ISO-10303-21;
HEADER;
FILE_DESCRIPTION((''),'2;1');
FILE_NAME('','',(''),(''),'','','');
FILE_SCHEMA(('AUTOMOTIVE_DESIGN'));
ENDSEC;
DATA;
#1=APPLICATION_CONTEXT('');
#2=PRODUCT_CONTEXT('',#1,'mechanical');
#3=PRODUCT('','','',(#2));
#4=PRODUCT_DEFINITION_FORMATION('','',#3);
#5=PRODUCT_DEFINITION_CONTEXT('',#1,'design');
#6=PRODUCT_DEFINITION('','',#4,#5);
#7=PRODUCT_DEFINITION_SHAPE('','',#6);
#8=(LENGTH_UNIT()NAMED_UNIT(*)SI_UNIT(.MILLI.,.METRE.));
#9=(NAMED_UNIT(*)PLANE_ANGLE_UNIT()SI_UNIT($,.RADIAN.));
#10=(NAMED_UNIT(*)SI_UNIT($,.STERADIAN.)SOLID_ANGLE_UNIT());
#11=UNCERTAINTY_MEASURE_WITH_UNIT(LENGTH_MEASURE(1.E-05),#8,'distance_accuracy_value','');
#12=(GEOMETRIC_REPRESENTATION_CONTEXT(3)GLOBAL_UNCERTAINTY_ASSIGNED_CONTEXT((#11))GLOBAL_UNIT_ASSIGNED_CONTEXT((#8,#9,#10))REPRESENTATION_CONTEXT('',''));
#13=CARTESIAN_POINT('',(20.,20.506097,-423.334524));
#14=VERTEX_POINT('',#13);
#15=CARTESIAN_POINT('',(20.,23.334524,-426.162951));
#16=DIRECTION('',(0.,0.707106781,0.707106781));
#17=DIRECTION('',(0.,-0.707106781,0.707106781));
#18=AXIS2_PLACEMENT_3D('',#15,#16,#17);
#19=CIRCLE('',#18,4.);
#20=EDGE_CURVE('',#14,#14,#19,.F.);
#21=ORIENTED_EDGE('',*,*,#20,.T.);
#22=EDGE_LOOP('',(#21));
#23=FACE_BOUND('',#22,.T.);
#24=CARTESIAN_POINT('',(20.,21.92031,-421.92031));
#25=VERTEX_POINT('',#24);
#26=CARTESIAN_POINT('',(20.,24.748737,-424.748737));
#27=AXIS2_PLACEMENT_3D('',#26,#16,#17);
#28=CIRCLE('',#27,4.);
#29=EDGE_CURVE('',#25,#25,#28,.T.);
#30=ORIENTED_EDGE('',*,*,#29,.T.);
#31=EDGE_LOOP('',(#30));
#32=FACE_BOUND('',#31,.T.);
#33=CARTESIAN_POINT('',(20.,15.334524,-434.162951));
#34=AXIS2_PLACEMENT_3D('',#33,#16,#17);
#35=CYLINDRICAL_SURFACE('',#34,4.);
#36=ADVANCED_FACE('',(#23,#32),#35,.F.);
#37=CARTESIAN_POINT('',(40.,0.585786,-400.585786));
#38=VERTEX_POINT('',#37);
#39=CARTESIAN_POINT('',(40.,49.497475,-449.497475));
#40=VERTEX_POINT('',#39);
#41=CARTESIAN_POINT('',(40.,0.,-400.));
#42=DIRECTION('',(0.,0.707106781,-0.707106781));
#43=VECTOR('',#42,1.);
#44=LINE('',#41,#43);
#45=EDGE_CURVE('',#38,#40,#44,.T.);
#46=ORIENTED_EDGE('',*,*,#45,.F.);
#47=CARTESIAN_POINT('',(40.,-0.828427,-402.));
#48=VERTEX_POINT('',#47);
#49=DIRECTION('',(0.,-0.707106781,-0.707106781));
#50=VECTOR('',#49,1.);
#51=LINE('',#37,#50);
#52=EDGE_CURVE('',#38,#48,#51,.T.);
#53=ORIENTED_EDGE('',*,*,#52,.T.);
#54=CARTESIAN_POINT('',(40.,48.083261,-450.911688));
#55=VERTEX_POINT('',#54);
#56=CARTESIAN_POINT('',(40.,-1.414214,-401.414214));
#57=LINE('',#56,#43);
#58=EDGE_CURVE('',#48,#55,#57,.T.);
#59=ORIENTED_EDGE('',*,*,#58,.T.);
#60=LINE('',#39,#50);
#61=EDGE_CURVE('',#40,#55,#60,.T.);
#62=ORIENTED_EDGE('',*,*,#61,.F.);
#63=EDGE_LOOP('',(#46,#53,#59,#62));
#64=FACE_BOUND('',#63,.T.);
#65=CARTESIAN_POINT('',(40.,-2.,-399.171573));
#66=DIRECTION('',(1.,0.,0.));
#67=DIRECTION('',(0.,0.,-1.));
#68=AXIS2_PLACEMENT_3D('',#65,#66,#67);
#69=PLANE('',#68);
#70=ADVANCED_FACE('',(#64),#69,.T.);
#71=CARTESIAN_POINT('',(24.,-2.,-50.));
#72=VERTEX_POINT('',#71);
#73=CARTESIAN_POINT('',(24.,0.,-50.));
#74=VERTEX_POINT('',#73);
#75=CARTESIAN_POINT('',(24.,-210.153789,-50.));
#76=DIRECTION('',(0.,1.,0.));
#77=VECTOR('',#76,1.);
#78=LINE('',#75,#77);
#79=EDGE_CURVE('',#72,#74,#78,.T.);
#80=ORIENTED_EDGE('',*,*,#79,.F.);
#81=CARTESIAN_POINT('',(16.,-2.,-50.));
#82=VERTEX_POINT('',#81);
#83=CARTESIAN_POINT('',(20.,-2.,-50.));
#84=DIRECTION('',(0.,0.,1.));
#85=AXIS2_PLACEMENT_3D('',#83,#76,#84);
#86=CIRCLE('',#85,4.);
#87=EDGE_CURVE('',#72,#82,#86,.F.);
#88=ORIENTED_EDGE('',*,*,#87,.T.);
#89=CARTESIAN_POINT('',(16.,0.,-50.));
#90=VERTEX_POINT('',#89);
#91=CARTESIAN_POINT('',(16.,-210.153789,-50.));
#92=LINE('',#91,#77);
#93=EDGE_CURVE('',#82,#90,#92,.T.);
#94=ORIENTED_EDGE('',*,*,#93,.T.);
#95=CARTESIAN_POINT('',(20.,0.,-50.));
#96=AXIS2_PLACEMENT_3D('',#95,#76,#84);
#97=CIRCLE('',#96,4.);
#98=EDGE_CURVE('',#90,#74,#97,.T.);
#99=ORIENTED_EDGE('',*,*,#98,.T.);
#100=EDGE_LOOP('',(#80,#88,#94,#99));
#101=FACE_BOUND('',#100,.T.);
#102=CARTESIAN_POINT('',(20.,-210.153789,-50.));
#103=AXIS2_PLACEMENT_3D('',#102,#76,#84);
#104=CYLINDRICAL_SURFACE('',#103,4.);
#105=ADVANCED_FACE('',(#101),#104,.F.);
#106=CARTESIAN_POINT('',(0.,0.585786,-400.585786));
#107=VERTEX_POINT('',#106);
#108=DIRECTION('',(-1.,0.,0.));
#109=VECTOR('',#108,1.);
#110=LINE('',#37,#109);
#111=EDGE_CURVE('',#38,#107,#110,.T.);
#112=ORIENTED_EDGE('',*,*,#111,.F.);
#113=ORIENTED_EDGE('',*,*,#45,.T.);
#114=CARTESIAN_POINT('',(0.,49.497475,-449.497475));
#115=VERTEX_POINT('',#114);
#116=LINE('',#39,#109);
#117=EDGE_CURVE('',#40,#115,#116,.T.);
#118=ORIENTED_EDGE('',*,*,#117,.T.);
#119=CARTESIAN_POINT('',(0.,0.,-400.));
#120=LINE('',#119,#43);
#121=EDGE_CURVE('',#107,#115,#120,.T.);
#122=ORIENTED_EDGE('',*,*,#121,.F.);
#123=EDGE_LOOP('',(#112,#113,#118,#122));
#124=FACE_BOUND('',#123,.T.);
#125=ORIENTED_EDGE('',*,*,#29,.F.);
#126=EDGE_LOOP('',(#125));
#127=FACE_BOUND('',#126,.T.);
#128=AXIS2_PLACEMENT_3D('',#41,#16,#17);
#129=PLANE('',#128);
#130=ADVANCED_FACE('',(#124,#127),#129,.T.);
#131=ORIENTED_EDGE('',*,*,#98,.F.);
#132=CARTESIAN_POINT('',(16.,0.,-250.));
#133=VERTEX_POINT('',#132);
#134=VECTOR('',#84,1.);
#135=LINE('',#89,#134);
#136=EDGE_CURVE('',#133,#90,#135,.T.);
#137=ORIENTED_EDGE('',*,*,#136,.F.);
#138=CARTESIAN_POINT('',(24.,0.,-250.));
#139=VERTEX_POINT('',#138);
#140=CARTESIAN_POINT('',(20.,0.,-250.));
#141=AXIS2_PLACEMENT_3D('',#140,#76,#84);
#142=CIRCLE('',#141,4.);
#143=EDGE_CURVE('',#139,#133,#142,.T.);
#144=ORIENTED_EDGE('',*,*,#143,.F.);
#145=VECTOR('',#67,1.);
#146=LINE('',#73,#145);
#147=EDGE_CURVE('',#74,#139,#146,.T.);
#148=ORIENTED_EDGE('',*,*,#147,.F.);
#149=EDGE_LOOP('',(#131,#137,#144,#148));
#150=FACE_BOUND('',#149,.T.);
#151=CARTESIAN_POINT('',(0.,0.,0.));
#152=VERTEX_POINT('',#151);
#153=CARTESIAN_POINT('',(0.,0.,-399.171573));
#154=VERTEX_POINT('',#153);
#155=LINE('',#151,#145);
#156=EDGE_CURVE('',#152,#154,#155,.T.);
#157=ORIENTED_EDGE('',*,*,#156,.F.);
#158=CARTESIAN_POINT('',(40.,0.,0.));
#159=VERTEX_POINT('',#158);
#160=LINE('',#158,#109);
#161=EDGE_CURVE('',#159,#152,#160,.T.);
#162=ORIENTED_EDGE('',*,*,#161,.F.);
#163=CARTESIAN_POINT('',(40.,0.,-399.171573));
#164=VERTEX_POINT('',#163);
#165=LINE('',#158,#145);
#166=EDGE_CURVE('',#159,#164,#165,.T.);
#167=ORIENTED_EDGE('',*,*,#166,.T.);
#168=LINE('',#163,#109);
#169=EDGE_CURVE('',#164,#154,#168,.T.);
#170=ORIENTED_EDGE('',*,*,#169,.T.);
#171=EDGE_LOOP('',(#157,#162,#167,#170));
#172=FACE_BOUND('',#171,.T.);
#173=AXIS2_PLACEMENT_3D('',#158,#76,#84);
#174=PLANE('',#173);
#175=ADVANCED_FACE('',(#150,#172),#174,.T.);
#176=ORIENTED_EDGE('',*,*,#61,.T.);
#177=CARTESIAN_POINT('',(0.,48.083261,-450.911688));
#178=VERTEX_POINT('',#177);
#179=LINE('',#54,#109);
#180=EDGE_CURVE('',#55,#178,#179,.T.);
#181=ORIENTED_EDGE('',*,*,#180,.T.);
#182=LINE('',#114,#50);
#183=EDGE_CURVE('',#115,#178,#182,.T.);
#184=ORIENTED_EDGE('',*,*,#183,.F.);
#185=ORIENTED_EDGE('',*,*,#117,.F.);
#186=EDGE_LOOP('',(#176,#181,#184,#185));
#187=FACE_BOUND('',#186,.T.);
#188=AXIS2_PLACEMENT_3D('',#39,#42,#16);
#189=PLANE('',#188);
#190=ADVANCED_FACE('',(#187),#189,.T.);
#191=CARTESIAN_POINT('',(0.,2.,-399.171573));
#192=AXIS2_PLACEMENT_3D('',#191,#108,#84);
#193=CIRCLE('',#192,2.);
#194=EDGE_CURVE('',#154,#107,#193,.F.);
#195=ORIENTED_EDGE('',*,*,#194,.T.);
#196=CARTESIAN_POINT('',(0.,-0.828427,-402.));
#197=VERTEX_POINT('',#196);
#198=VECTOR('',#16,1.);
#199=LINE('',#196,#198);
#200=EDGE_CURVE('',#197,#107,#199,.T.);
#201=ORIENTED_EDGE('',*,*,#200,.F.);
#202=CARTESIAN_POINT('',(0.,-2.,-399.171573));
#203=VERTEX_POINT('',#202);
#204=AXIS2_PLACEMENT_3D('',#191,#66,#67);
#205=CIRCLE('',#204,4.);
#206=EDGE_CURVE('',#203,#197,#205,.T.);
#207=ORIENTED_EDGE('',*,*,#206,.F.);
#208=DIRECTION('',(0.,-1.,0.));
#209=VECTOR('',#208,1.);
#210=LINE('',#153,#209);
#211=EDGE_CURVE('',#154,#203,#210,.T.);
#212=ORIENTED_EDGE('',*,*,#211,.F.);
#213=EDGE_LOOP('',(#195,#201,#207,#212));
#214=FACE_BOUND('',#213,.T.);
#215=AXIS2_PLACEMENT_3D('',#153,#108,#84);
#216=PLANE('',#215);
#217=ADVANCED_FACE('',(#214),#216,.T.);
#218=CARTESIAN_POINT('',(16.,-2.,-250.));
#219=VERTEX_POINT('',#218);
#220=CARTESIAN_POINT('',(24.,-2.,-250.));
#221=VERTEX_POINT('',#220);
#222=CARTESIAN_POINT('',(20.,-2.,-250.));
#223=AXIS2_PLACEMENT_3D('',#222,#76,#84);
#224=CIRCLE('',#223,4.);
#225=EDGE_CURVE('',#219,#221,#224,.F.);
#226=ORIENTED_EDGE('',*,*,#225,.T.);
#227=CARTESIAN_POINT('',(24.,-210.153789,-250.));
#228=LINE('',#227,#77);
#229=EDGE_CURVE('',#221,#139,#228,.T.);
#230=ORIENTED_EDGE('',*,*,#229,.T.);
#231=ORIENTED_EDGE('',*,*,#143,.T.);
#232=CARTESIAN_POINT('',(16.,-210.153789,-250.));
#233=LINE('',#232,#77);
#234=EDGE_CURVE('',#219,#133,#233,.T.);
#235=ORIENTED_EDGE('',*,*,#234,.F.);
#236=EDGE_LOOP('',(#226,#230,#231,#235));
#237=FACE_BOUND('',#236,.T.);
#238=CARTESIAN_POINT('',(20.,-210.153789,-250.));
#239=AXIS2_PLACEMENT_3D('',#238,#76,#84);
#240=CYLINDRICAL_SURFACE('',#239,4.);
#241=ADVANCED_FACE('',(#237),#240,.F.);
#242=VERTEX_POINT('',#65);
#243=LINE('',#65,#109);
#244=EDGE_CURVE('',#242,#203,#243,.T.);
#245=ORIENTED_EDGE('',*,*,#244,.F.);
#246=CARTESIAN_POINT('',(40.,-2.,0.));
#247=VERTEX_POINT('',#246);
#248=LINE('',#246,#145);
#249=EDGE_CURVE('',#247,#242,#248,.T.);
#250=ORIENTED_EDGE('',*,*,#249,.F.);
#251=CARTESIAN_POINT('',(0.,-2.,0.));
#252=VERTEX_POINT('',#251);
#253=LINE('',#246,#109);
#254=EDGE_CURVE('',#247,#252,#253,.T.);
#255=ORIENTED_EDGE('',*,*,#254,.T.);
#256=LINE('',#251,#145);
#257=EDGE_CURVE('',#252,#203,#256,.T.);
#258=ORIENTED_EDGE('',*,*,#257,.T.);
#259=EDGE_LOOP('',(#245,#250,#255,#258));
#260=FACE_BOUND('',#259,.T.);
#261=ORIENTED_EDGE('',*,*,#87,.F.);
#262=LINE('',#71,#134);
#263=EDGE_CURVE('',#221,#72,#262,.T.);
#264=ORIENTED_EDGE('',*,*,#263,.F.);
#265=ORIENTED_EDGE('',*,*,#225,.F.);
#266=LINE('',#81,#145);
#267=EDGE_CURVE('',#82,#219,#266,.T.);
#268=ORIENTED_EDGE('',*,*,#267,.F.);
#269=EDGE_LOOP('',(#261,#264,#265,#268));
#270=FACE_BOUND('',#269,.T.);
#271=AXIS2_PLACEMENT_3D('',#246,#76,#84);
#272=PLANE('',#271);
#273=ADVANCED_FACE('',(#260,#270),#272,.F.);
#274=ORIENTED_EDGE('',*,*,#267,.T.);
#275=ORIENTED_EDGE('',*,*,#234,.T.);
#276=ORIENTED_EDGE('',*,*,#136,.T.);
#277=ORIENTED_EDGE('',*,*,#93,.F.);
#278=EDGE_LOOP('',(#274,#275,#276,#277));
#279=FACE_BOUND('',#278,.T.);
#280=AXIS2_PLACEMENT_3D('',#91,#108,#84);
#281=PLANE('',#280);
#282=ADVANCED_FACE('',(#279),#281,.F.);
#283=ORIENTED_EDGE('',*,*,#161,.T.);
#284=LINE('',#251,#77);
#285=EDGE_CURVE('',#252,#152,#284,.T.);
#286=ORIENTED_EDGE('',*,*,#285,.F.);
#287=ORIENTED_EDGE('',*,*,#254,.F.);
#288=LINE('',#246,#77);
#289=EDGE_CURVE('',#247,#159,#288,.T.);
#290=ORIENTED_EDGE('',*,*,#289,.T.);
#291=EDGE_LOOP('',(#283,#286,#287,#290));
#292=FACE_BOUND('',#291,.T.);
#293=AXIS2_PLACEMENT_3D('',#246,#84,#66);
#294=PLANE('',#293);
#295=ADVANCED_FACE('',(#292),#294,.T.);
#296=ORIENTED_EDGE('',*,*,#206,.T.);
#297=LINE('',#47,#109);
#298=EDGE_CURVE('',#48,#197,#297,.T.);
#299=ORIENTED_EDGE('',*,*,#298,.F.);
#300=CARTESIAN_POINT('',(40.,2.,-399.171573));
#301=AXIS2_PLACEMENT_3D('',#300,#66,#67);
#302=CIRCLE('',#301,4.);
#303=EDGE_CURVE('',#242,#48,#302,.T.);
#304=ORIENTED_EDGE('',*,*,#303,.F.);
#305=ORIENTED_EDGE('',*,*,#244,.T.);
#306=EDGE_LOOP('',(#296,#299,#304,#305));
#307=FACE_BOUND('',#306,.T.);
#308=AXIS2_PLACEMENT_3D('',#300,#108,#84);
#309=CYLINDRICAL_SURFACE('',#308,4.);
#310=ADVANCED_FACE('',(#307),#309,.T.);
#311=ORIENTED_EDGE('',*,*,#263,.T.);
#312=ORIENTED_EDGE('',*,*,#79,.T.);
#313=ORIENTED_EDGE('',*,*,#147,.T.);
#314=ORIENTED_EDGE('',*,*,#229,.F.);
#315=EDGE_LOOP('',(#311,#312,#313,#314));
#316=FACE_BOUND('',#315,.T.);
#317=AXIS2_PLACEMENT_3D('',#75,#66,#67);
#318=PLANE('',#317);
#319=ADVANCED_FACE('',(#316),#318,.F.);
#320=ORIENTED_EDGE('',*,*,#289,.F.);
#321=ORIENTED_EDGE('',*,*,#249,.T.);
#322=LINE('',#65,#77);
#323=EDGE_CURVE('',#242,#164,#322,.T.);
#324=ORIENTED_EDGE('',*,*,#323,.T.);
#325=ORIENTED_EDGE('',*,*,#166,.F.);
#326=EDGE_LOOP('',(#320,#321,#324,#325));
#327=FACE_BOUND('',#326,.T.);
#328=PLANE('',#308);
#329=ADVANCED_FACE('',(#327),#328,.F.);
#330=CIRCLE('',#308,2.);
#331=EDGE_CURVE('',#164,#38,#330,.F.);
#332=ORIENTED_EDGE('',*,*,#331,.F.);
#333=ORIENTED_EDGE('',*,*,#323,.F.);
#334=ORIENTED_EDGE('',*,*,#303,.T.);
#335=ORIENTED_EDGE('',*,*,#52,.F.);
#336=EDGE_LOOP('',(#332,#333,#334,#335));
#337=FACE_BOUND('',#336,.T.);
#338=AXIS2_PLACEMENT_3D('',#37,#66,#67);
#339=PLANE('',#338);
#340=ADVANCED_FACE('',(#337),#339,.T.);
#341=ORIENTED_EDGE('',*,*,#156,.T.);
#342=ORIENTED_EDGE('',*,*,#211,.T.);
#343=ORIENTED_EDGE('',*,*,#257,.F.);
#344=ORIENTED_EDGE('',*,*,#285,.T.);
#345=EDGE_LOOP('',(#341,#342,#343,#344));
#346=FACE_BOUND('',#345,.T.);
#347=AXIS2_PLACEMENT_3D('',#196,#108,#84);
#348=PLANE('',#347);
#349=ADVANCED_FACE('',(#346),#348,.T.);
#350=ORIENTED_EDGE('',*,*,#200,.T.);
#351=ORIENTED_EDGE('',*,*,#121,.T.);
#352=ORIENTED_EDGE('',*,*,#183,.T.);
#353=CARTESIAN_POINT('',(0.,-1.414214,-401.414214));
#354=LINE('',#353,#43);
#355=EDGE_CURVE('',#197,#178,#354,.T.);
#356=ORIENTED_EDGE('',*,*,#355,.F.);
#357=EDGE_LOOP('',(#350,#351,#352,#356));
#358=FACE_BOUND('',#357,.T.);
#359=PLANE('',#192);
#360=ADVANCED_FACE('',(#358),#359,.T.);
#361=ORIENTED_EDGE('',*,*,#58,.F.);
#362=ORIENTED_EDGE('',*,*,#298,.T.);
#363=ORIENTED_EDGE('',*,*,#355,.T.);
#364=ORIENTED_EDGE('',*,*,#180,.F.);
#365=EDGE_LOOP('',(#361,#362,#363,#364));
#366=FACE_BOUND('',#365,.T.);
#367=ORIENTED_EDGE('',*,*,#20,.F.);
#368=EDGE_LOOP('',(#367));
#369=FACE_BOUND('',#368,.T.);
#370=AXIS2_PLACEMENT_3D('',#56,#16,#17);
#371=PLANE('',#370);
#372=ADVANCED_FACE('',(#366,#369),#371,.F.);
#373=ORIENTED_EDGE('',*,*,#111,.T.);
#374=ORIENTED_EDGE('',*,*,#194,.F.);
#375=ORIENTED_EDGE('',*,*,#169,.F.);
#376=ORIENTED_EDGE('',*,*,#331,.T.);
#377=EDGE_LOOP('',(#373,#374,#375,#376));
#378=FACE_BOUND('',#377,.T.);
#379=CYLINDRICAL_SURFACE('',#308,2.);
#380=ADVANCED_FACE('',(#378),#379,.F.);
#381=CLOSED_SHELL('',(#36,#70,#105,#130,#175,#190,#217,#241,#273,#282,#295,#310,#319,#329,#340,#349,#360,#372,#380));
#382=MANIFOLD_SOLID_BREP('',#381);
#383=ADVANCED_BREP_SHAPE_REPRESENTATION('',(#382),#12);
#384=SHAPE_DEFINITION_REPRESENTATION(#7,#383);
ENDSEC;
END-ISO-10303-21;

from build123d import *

# Parameters (mm, degrees)
BASE_FLANGE1_DEPTH = 40
SKETCH7_R          = 4
CUT_EXTRUDE1_DEPTH = 2
CUT_EXTRUDE2_DEPTH = 2


# Sheet-metal steps are written as plain solids
with BuildPart() as part:
    # Sketch1 → Base-Flange1 (new body)
    with BuildSketch(Plane(origin=(0, 0, 0), x_dir=(0, 0, -1), z_dir=(1, 0, 0))):
        with BuildLine():
            Line((0, 0), (399.171572875, 0))
            ThreePointArc((399.171572875, 0), (399.93693974, 0.152240935), (400.585786438, 0.585786438))
            Line((400.585786438, 0.585786438), (449.497474683, 49.497474683))
            Line((449.497474683, 49.497474683), (450.911688245, 48.083261121))
            Line((450.911688245, 48.083261121), (402, -0.828427125))
            ThreePointArc((402, -0.828427125), (400.702306605, -1.69551813), (399.171572875, -2))
            Line((399.171572875, -2), (0, -2))
            Line((0, -2), (0, 0))
        make_face()
    extrude(amount=BASE_FLANGE1_DEPTH)

    # Sketch7 → Cut-Extrude1 (cut)
    with BuildSketch(Plane(origin=(0, -200, -200), x_dir=(1, 0, 0), z_dir=(0, 0.7071067811865456, 0.7071067811865496))):
        with Locations(Location((20, 317.842712475, 0), (0, 0, 270))):
            Circle(SKETCH7_R)
    extrude(amount=-CUT_EXTRUDE1_DEPTH, mode=Mode.SUBTRACT)

    # Sketch8 → Cut-Extrude2 (cut)
    with BuildSketch(Plane(origin=(0, 0, 0), x_dir=(1, 0, 0), z_dir=(0, 1, 0))):
        with BuildLine():
            Line((24, 50), (24, 250))
            ThreePointArc((24, 250), (20, 254), (16, 250))
            Line((16, 250), (16, 50))
            ThreePointArc((16, 50), (20, 46), (24, 50))
        make_face()
    extrude(amount=-CUT_EXTRUDE2_DEPTH, mode=Mode.SUBTRACT)


solid = part.part
